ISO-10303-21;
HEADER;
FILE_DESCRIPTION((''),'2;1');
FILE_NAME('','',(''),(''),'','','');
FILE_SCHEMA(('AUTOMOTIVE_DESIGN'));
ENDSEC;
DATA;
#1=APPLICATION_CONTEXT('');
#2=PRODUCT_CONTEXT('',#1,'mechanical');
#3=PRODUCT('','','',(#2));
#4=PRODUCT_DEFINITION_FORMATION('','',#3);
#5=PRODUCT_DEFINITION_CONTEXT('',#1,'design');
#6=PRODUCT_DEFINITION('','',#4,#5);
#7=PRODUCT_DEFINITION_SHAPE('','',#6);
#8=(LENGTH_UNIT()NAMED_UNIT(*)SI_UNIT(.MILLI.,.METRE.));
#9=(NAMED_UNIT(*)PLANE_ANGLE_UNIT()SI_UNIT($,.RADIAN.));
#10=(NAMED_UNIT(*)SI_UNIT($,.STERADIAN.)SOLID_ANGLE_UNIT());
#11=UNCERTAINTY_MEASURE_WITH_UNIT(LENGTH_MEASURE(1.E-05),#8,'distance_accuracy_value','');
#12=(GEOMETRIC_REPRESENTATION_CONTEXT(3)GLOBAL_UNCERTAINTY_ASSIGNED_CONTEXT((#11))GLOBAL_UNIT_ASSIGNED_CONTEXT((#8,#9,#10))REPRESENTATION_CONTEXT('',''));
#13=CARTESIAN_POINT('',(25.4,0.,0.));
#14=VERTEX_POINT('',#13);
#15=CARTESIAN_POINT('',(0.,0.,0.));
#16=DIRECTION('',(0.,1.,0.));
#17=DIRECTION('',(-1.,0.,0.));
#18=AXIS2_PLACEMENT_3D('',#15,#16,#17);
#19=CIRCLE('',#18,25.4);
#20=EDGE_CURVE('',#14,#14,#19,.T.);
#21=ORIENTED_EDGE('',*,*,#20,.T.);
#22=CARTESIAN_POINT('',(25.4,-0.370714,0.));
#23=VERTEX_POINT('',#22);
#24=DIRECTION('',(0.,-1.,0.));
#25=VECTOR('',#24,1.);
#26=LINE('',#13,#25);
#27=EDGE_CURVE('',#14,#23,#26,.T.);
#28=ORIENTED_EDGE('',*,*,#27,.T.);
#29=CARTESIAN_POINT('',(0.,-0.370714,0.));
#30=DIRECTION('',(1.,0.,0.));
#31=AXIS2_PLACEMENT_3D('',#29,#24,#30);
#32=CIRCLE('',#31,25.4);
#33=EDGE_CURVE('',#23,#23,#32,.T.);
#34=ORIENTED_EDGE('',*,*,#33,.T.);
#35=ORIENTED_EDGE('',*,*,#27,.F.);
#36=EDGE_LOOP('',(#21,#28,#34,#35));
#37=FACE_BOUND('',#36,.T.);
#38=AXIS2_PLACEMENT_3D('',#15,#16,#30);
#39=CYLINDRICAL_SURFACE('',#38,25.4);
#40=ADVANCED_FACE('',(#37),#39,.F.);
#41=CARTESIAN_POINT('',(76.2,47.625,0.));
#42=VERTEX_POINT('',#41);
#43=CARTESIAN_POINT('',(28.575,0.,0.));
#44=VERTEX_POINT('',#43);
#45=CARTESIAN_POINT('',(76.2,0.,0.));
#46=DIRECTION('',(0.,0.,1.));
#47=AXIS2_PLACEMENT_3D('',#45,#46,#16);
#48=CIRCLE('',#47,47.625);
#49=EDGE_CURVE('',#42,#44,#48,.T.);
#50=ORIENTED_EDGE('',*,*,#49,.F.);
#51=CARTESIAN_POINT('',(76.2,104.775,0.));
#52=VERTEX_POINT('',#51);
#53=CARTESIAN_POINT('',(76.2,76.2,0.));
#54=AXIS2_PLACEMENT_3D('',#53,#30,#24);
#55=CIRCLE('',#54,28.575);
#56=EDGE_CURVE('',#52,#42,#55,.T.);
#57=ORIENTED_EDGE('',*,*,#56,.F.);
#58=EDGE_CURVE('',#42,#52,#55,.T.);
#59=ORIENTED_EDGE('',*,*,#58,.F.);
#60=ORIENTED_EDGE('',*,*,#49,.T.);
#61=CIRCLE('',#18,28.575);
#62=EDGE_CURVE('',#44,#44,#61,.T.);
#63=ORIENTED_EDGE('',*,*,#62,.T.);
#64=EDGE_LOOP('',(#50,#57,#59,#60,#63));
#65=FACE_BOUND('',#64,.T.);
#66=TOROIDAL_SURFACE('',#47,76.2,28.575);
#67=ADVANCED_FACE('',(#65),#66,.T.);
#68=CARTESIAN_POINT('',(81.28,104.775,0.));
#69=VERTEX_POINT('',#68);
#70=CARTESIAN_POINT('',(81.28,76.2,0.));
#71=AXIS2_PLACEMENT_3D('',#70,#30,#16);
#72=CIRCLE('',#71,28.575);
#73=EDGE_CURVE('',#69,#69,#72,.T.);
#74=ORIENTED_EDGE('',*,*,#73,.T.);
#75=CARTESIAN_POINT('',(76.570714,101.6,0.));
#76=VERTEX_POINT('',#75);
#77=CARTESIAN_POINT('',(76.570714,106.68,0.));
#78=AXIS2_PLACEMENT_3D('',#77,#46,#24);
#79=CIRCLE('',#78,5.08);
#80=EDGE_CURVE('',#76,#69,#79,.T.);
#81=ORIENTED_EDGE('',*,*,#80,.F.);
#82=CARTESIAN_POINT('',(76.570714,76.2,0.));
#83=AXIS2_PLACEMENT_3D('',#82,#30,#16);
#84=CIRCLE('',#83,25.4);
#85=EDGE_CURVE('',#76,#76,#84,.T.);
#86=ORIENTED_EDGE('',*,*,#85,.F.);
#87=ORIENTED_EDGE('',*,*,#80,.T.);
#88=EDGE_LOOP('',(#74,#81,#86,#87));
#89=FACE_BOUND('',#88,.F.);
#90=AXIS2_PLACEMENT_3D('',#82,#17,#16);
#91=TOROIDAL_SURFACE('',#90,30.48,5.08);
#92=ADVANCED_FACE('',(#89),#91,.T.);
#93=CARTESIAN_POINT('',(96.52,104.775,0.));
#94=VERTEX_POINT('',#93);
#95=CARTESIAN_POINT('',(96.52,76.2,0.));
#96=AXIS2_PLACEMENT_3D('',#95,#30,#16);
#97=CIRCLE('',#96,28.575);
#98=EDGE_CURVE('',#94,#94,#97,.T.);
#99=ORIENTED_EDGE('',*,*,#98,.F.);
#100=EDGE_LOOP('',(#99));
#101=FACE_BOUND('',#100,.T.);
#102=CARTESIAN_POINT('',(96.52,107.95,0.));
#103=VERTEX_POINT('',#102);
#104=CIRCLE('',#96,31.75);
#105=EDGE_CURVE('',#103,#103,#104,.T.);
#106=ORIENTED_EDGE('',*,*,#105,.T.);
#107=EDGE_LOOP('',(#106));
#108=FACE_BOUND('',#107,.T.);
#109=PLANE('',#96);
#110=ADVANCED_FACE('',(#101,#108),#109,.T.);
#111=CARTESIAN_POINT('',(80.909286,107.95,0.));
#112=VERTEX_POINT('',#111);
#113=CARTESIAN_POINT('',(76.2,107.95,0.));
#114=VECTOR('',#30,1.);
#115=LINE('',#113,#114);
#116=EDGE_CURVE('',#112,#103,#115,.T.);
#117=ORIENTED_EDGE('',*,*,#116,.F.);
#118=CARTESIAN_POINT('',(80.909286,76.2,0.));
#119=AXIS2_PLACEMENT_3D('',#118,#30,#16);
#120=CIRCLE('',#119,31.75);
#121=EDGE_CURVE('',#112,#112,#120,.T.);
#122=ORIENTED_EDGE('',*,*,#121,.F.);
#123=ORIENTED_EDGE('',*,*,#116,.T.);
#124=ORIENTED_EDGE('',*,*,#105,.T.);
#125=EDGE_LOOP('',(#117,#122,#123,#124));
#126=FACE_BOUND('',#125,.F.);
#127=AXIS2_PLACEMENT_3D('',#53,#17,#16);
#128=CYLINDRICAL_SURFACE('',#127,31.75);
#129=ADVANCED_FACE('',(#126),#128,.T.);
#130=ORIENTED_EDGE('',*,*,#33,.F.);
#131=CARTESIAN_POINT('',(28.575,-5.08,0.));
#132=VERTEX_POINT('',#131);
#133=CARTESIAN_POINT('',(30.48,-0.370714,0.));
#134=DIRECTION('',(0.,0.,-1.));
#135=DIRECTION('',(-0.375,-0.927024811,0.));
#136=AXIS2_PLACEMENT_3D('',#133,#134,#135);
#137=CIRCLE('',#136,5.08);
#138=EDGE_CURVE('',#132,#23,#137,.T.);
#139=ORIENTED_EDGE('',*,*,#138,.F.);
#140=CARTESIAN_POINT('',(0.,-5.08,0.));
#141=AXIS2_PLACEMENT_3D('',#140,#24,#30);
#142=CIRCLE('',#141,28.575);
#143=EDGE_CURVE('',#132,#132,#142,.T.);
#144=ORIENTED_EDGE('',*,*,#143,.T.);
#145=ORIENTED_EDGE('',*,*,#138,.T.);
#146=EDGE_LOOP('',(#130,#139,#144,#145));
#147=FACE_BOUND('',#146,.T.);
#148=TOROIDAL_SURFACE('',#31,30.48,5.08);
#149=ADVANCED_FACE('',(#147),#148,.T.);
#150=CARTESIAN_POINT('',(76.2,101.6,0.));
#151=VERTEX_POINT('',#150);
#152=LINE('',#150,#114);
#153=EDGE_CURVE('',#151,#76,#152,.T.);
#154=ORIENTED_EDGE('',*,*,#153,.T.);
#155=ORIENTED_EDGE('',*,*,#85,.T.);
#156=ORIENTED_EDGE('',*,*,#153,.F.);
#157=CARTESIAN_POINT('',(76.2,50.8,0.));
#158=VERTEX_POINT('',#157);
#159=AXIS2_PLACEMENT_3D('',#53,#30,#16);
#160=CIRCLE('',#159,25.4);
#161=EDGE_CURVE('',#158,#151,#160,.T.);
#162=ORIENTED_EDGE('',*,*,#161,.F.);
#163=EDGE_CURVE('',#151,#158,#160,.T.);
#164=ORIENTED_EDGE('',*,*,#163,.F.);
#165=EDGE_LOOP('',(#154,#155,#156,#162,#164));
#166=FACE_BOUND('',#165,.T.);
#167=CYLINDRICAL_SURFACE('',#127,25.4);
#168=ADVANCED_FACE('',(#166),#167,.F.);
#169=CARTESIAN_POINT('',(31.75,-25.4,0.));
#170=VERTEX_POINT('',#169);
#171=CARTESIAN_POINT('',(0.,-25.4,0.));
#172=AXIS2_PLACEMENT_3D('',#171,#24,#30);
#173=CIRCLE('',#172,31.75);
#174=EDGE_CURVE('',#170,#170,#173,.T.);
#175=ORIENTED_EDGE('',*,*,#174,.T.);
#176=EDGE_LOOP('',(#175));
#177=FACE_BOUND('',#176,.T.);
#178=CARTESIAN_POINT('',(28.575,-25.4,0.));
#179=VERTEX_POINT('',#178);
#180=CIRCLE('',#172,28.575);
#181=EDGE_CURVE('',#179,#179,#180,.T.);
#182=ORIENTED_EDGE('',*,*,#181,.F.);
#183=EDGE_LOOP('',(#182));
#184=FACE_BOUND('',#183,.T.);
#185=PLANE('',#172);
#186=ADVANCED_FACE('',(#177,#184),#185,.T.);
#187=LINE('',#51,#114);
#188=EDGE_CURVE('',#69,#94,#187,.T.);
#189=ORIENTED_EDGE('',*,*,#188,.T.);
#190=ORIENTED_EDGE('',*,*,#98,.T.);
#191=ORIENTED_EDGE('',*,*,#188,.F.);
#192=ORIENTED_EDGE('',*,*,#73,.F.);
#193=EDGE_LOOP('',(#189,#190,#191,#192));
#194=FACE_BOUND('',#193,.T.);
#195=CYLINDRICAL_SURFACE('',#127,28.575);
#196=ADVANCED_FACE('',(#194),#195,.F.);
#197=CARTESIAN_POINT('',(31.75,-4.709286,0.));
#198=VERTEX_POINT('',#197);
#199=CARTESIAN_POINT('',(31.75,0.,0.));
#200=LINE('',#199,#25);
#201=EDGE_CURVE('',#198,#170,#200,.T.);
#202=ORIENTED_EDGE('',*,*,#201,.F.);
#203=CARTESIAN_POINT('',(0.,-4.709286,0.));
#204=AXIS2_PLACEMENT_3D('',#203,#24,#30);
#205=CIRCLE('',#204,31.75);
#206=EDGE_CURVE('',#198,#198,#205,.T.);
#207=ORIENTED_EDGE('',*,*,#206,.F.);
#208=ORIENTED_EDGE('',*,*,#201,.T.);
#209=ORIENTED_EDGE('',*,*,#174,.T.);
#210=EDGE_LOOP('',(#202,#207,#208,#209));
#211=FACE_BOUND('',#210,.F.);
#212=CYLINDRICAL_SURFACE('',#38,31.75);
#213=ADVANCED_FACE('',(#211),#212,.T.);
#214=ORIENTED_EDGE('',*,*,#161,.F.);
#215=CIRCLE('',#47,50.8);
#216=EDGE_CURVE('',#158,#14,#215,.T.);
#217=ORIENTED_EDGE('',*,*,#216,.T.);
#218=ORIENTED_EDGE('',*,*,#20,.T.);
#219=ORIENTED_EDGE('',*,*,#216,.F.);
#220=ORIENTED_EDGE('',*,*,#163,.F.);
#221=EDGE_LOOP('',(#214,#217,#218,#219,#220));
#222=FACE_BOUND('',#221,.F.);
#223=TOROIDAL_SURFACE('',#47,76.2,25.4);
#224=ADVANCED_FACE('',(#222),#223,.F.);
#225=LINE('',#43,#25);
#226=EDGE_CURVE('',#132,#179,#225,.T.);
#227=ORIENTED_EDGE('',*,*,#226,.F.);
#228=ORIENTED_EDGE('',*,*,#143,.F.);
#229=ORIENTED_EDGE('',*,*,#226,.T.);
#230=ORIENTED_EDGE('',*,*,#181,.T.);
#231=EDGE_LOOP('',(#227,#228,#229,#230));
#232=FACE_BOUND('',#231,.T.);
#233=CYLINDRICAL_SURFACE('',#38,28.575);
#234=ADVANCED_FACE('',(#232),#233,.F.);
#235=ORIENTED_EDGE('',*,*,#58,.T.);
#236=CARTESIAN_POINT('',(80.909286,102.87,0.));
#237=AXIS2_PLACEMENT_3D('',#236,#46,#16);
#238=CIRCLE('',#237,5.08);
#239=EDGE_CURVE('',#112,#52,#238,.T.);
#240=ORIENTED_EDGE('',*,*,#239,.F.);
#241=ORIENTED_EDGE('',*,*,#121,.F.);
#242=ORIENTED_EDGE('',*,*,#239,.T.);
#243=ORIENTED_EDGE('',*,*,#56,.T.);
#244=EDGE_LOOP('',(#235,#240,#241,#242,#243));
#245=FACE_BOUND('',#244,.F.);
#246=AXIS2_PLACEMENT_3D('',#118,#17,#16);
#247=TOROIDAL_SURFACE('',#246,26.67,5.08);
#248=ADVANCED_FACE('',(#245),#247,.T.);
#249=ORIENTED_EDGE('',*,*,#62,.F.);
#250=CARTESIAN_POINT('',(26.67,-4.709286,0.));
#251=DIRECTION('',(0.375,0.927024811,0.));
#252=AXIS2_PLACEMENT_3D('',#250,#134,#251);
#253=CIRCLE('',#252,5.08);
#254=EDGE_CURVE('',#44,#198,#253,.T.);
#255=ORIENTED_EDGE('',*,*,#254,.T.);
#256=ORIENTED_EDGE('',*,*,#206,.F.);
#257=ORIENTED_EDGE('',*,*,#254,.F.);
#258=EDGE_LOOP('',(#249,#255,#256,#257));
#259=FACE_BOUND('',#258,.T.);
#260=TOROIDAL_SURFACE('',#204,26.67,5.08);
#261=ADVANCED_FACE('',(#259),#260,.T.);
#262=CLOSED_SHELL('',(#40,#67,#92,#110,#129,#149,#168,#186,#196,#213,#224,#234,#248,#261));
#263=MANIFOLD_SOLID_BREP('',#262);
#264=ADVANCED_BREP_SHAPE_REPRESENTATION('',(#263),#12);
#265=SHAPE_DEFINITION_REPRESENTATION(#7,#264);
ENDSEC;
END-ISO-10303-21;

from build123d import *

# Parameters (mm, degrees)
F0_R     = 28.575
F0_R_2   = 25.4
F0_R_3   = 31.75
F3_DEPTH = 25.4
F4_DEPTH = 5.08
F5_R     = 28.575
F5_R_2   = 25.4
F6_DEPTH = 5.08
F5_R_3   = 31.75
F7_DEPTH = 20.32


# Not quite as in the source:
# - a fillet or chamfer that OpenCascade refuses, or shapes differently, is made with other operations: its cross-section is extruded or revolved along the edge and cut away or added


with BuildPart() as f2:
    # F2: sweep along a path in F1
    with BuildLine(Plane.XY) as f2_path:
        ThreePointArc((76.2, 76.2), (22.3184632736, 53.8815367264), (0, 0))
    # F0 (on Front) → F2 (sweep)
    with BuildSketch(Plane.XZ):
        Circle(F0_R)
        Circle(F0_R_2, mode=Mode.SUBTRACT)
    sweep(path=f2_path.line)

    # F0 (on Front) → F3 (join)
    with BuildSketch(Plane.XZ):
        Circle(F0_R_3)
        Circle(F0_R, mode=Mode.SUBTRACT)
    extrude(amount=F3_DEPTH)

    # F0 (on Front) → F4 (join)
    with BuildSketch(Plane.XZ):
        Circle(F0_R)
        Circle(F0_R_2, mode=Mode.SUBTRACT)
    extrude(amount=F4_DEPTH)

    # F5 (on face) → F6 (join)
    with BuildSketch(Plane.YZ.offset(76.2)):
        with Locations((76.2, 0)):
            Circle(F5_R)
        with Locations((76.2, 0)):
            Circle(F5_R_2, mode=Mode.SUBTRACT)
    extrude(amount=F6_DEPTH)

    # F5 (on face) → F7 (join)
    with BuildSketch(Plane.YZ.offset(76.2)):
        with Locations((76.2, 0)):
            Circle(F5_R_3)
        with Locations((76.2, 0)):
            Circle(F5_R, mode=Mode.SUBTRACT)
    extrude(amount=F7_DEPTH)

    # F8: fillet of radius 5.08 on 4 edges, made by hand

    # F8_s1 → F8_t2 (revolve, cut)
    with BuildSketch(Plane.XY):
        with BuildLine():
            ThreePointArc((76.5707139607, 101.6), (79.4105202921, 102.4678865162), (81.28, 104.775))
            Line((81.28, 104.775), (81.28, 101.6))
            Line((81.28, 101.6), (76.5707139607, 101.6))
        make_face()
    revolve(axis=Axis((81.28, 76.2, 0), (1, 0, 0)), mode=Mode.SUBTRACT)

    # F8_s3 → F8_t4 (revolve, cut)
    with BuildSketch(Plane.XY):
        with BuildLine():
            ThreePointArc((80.9092860393, 107.95), (78.0694797079, 107.0821134838), (76.2, 104.775))
            Line((76.2, 104.775), (76.2, 107.95))
            Line((76.2, 107.95), (80.9092860393, 107.95))
        make_face()
    revolve(axis=Axis((76.2, 76.2, 0), (1, 0, 0)), mode=Mode.SUBTRACT)

    # F8_s5 → F8_t6 (revolve, cut)
    with BuildSketch(Plane.XY):
        with BuildLine():
            ThreePointArc((28.575, -5.08), (26.2678865162, -3.2105202921), (25.4, -0.3707139607))
            Line((25.4, -0.3707139607), (25.4, -5.08))
            Line((25.4, -5.08), (28.575, -5.08))
        make_face()
    revolve(axis=Axis((0, -5.08, 0), (0, -1, 0)), mode=Mode.SUBTRACT)

    # F8_s7 → F8_t8 (revolve, cut)
    with BuildSketch(Plane.XY):
        with BuildLine():
            ThreePointArc((28.575, 0), (30.8821134838, -1.8694797079), (31.75, -4.7092860393))
            Line((31.75, -4.7092860393), (31.75, 0))
            Line((31.75, 0), (28.575, 0))
        make_face()
    revolve(axis=Axis((0, 0, 0), (0, -1, 0)), mode=Mode.SUBTRACT)


solid = f2.part
